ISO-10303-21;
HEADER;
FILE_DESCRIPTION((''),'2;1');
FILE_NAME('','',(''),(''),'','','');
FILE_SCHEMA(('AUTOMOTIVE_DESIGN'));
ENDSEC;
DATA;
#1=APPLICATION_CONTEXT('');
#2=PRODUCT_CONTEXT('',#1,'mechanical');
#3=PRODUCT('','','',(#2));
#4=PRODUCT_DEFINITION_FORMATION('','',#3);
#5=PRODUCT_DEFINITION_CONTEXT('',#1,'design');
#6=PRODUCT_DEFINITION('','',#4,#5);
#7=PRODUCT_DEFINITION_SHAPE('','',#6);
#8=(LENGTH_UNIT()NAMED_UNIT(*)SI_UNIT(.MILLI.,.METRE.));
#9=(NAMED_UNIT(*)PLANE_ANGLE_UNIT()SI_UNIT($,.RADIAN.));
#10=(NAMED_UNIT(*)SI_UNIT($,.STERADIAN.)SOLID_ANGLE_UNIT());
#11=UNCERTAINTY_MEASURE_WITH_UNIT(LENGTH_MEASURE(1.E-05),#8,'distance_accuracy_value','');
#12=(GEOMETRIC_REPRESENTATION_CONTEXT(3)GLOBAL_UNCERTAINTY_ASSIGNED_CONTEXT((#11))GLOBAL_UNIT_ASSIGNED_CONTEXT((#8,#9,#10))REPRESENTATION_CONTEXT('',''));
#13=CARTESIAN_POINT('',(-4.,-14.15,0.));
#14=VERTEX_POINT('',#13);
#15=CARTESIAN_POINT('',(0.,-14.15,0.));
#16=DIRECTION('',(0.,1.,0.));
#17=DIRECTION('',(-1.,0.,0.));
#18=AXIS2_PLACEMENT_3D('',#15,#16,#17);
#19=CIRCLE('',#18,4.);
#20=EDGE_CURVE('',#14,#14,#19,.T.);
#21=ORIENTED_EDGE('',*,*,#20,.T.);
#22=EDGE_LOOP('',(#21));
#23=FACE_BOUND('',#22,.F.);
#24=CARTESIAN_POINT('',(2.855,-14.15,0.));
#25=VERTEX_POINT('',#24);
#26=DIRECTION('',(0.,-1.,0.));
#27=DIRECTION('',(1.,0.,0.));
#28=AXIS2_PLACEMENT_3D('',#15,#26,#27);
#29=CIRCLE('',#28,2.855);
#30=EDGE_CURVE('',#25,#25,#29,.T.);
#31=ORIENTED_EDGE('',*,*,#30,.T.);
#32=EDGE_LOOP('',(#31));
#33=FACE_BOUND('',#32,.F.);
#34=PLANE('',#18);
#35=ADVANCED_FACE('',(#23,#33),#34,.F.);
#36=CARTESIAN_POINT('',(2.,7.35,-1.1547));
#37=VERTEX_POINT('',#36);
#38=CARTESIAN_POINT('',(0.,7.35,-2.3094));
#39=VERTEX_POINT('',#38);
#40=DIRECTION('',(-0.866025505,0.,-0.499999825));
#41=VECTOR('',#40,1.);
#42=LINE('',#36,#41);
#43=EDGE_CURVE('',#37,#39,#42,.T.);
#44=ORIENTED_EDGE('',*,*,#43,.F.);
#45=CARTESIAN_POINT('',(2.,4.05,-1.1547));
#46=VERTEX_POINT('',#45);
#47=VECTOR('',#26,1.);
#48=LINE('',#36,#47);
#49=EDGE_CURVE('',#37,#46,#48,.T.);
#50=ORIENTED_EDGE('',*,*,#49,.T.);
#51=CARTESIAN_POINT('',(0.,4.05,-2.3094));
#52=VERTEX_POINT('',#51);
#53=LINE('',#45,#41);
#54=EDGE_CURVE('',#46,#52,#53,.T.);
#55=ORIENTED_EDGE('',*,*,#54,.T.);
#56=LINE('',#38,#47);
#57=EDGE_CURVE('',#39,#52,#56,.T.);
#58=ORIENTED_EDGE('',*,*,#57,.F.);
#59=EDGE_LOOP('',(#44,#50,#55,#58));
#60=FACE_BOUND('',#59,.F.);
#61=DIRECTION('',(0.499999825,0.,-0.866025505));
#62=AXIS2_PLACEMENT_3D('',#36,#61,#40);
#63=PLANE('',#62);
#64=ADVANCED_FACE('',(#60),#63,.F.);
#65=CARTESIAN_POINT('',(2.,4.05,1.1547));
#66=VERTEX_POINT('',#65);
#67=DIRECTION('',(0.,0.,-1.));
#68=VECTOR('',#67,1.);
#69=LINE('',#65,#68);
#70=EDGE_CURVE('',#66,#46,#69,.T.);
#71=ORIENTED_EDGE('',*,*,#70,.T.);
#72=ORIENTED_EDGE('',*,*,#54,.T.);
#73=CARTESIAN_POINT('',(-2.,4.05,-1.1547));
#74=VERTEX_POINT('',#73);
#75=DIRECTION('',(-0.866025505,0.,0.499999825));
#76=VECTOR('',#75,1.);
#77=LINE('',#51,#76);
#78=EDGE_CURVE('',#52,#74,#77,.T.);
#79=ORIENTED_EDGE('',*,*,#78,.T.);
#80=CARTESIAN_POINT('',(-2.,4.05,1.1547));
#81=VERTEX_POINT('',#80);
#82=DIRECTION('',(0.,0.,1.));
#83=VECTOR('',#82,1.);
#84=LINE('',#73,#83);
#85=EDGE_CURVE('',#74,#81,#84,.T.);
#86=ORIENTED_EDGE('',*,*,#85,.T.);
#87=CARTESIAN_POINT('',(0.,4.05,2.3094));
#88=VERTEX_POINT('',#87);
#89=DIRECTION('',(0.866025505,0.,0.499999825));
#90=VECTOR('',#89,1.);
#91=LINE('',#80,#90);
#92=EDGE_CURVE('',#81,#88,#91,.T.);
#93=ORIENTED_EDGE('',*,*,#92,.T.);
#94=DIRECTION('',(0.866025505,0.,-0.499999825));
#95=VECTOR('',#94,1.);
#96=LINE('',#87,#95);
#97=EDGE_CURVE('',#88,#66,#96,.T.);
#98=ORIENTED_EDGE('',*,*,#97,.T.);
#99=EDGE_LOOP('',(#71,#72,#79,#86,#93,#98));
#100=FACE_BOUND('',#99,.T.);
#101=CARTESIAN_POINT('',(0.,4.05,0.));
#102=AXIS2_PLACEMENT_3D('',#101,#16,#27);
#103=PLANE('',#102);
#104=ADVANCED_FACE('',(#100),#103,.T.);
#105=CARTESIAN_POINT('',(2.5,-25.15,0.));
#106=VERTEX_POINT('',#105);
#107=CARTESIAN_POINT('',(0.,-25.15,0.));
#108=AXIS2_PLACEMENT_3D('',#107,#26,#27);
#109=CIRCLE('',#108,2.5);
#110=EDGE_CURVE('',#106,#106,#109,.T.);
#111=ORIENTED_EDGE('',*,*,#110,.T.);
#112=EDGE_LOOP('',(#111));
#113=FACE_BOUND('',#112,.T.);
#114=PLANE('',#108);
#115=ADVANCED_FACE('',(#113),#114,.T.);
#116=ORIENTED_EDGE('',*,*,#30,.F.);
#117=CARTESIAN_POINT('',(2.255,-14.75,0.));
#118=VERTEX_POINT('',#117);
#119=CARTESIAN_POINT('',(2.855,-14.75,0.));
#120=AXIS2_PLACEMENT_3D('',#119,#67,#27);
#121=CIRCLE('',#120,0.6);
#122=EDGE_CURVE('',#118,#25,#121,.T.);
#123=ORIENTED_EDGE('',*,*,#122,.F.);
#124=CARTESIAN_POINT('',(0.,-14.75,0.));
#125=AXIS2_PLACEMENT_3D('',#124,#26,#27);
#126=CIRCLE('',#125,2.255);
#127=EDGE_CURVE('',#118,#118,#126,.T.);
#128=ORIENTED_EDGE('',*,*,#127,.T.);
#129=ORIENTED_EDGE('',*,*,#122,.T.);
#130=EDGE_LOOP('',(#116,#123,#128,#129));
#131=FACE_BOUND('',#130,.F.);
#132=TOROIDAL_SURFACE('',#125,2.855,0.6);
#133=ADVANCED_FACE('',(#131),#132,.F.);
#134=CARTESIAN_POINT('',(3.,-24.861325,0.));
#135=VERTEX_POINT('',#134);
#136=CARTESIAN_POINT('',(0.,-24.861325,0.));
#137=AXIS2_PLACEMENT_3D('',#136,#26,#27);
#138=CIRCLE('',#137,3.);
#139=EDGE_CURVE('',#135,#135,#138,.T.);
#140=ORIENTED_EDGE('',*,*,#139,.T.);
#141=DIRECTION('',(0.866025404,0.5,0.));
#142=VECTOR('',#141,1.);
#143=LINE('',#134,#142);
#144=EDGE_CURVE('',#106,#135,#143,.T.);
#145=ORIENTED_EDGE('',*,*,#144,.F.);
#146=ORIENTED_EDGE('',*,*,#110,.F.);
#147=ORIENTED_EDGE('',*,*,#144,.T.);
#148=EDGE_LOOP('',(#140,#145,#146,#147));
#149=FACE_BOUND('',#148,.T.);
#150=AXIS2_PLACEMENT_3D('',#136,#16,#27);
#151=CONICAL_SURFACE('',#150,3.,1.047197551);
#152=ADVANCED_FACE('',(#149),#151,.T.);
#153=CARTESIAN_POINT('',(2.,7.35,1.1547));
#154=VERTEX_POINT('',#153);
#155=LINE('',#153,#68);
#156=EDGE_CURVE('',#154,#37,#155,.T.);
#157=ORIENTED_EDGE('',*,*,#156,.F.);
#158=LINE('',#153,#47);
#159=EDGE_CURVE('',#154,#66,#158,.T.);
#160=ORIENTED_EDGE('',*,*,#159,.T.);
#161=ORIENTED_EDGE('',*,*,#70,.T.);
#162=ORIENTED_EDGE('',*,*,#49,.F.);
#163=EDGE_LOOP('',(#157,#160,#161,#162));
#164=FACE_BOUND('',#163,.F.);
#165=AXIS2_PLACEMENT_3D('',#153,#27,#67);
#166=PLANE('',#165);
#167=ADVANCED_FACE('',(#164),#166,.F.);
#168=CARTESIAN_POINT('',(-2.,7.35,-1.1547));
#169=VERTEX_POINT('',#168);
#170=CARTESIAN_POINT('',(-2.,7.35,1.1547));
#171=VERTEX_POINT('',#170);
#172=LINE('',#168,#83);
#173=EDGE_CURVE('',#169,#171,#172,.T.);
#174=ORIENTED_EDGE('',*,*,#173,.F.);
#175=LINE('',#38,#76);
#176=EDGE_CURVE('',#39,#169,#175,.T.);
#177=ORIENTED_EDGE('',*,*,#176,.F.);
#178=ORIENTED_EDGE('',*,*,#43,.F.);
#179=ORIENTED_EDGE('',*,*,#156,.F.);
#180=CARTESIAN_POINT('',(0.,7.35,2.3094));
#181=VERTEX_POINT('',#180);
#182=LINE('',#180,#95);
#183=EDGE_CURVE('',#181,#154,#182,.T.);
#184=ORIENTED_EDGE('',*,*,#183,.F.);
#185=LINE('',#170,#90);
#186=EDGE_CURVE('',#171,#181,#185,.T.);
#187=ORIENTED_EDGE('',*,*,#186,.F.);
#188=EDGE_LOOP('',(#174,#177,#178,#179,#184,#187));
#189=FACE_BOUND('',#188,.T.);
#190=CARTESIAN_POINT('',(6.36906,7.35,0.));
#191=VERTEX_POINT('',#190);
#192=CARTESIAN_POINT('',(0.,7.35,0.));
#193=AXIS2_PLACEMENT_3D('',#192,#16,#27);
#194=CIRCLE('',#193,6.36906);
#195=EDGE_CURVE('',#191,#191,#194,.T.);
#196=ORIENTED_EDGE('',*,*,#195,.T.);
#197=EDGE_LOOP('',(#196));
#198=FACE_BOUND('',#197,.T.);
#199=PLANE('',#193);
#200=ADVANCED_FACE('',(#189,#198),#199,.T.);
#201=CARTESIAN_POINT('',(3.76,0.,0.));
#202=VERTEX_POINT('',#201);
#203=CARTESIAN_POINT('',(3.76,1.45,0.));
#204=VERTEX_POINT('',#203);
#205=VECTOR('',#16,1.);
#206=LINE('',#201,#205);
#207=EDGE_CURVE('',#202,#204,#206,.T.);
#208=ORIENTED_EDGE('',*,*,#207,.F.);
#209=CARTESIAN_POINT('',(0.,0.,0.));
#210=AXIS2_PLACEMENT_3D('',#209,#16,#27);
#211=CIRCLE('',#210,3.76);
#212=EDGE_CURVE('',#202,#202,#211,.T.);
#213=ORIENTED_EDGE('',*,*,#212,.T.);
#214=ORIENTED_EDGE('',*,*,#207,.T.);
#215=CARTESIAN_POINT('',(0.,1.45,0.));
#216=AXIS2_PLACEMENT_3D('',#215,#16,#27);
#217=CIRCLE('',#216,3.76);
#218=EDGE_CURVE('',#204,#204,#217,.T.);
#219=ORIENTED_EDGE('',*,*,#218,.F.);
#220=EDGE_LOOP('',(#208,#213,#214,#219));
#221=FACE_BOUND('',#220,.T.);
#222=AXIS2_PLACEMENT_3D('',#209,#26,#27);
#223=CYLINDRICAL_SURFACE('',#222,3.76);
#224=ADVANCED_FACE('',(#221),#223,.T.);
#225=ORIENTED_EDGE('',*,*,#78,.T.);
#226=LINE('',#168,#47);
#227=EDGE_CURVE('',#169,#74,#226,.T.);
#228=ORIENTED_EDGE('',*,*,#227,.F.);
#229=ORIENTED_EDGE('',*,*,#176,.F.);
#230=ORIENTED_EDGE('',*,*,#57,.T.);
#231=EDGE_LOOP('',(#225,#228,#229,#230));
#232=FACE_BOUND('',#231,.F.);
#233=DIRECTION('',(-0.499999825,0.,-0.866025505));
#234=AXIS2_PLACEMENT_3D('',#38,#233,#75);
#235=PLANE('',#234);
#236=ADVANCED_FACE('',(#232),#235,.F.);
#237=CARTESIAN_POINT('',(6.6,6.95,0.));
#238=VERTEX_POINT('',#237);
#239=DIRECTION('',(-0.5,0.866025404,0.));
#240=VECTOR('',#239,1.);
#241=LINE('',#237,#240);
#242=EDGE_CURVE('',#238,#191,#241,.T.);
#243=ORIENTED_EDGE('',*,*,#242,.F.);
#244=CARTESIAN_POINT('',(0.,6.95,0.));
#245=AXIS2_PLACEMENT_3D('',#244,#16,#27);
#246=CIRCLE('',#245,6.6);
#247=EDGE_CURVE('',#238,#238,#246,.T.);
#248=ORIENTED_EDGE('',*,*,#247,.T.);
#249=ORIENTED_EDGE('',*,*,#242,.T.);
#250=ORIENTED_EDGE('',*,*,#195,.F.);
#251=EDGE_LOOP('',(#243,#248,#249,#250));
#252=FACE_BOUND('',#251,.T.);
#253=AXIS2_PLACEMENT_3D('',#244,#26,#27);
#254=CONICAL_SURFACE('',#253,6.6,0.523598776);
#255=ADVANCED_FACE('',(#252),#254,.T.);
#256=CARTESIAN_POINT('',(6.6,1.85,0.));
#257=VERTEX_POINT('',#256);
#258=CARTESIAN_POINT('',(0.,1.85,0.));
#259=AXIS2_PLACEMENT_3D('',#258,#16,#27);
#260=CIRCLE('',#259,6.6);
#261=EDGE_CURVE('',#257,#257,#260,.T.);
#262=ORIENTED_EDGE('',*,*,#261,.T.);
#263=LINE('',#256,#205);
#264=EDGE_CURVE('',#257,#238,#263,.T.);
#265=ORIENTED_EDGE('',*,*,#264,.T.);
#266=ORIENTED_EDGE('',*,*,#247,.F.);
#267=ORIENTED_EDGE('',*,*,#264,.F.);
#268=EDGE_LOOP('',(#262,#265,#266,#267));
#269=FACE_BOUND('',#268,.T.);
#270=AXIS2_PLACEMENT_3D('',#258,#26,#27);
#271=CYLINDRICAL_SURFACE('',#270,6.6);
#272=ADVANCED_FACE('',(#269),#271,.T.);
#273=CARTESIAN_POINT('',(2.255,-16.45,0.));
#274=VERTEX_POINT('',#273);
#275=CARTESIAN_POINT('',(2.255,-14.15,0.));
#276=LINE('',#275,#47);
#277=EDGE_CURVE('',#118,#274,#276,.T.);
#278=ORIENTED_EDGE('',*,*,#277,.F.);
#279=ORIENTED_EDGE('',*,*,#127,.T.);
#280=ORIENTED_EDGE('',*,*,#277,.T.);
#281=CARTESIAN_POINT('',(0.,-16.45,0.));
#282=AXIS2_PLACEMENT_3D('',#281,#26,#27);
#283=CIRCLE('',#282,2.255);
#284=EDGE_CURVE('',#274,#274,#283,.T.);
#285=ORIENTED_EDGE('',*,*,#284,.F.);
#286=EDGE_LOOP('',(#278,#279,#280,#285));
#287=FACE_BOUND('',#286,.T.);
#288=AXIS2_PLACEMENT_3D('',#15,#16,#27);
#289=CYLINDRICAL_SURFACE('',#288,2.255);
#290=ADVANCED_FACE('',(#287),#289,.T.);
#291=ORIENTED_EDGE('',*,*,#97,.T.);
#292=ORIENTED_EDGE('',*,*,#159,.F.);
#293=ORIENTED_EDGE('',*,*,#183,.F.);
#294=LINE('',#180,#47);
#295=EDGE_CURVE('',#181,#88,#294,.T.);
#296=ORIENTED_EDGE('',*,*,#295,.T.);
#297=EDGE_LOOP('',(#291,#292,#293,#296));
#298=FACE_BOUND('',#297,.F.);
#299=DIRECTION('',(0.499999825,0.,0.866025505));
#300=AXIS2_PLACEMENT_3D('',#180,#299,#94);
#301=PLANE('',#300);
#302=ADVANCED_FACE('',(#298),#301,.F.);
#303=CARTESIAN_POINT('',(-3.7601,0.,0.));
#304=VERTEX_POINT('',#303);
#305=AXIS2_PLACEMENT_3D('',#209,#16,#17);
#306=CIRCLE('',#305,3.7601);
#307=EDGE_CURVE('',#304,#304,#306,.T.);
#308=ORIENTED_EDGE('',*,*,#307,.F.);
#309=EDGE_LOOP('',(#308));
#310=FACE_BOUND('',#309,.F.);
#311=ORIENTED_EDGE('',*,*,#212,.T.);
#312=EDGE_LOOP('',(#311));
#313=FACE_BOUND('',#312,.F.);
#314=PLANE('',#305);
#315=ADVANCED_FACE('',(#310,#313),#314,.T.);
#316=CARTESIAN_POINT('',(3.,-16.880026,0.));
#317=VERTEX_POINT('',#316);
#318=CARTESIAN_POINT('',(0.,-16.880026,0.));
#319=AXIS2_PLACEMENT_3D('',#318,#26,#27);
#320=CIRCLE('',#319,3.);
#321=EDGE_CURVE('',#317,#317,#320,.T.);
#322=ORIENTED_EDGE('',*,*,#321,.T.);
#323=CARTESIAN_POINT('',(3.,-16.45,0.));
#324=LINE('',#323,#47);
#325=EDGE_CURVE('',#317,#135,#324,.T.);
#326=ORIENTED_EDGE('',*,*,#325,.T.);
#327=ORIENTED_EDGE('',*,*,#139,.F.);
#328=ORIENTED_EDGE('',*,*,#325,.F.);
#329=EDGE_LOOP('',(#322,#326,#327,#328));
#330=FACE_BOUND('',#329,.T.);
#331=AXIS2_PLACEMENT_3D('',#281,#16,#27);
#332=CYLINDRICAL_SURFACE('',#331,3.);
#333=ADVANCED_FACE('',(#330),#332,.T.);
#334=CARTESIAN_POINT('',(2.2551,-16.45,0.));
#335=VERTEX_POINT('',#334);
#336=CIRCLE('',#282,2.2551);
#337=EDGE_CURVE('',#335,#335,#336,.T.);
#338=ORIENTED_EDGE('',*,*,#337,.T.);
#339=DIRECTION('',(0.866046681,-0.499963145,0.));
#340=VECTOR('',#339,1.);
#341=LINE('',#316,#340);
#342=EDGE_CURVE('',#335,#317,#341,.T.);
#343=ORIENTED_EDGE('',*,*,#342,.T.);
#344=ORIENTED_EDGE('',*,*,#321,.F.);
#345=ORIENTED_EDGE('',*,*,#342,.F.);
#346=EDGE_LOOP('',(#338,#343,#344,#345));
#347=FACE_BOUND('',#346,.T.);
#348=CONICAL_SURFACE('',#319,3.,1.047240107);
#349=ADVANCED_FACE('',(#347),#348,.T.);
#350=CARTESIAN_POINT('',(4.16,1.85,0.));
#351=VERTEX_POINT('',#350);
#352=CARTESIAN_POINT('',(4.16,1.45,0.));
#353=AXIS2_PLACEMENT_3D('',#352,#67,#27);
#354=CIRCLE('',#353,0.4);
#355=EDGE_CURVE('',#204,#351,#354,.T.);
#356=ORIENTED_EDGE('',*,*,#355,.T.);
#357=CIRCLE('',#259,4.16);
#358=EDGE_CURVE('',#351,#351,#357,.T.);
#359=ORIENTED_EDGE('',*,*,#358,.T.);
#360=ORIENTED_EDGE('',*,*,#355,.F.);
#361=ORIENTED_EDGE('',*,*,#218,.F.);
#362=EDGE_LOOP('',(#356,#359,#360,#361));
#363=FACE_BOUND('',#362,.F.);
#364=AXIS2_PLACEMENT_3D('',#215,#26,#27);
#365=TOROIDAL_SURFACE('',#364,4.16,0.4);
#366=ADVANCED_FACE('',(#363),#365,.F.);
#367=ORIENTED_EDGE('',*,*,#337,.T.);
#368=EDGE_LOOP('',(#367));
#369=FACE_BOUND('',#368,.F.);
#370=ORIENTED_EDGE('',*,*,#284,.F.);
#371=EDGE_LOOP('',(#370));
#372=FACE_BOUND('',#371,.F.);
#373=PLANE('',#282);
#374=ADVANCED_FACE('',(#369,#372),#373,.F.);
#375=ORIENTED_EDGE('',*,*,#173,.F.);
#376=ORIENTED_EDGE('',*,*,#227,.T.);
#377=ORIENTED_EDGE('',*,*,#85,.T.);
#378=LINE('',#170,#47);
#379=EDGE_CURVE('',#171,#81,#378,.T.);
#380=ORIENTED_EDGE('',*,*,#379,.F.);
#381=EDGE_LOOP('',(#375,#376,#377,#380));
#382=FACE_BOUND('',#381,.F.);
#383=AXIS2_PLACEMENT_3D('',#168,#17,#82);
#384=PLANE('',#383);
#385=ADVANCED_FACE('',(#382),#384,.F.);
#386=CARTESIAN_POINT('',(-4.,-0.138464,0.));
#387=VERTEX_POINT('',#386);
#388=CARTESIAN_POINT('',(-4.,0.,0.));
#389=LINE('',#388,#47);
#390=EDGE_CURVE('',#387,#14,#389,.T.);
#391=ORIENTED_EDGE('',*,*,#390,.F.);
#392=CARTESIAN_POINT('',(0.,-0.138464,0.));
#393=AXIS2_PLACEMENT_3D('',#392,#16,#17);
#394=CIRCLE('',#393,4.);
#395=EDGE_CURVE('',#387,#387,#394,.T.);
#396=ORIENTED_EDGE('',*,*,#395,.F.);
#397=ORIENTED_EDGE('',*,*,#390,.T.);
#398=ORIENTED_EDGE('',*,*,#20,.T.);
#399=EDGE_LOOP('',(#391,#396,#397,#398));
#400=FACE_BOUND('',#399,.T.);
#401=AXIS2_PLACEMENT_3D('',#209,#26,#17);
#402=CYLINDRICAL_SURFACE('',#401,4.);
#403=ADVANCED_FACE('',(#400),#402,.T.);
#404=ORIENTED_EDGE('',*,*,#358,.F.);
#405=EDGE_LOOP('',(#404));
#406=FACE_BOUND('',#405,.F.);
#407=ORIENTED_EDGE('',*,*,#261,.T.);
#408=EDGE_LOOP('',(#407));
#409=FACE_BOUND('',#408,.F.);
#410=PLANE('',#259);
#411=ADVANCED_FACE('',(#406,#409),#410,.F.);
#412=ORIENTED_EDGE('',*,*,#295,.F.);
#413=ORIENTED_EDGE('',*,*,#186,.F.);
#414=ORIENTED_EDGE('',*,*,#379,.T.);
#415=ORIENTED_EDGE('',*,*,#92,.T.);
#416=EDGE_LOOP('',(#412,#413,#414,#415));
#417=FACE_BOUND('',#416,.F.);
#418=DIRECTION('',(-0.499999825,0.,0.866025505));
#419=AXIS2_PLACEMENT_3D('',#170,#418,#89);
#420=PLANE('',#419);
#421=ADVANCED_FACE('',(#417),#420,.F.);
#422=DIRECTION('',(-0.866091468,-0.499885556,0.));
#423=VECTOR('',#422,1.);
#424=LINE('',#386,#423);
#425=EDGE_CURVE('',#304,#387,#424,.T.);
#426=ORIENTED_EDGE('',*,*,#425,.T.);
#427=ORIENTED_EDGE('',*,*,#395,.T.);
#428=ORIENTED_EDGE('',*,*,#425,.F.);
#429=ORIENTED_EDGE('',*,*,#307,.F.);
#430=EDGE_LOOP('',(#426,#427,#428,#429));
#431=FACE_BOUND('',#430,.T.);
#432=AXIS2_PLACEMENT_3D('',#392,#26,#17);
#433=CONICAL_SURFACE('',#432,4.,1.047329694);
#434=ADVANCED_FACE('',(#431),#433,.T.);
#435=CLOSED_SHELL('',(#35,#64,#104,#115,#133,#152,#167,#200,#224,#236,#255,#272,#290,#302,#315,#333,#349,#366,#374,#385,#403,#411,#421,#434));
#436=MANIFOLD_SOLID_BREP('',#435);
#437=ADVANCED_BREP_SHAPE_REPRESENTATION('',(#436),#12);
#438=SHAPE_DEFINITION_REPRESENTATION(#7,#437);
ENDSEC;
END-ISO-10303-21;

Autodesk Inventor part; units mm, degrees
ref_plane "YZ Plane" through (0, 0, 0) normal (1, 0, 0) x (0, 1, 0)
ref_plane "XZ Plane" through (0, 0, 0) normal (0, 1, 0) x (-1, 0, 0)
ref_plane "XY Plane" through (0, 0, 0) normal (0, 0, 1) x (1, 0, 0)
sketch "Sketch1" plane through (0, 0, 0) normal (0, 0, 1) x (1, 0, 0)
  line L0 (0, 0) -> (-4, 0)
  line L1 (-4, 0) -> (-4, -14.15)
  line L2 (-4, -14.15) -> (0, -14.15)
  line L3 (0, -14.15) -> (0, 0)
  line L4 (0, 2.83) -> (0, -16.98) projected
  line L5 (-4.8, 0) -> (0.8, 0) projected
  dimension "d1" = 14.15
  dimension "d2" = 4
revolve "Shoulder" add sketch "Sketch1" angle 360 about axis through (0, -14.15, 0) along (0, 1, 0)
sketch "Sketch2" plane through (0, 0, 0) normal (0, 1, 0) x (1, 0, 0)
  circle A0 centre (0, 0) radius 4 projected
  circle A1 centre (0, 0) radius 3.76
  dimension "d3" = 7.52
extrude "Shoulder_neck" add sketch "Sketch2" along normal blind 1.85 contours A1
sketch "Sketch3" plane through (0, 1.85, 0) normal (0, 1, 0) x (1, 0, 0)
  circle A0 centre (0, 0) radius 3.76 projected
  circle A1 centre (0, 0) radius 6.6
  dimension "d6" = 13.2
extrude "Head" add sketch "Sketch3" along normal blind 5.5 contours A0 | A1
sketch "Sketch4" plane through (0, -14.15, 0) normal (0, -1, 0) x (1, 0, 0)
  circle A0 centre (0, 0) radius 4 projected
  circle A1 centre (0, 0) radius 2.255
  dimension "d9" = 4.51
extrude "Thread_neck" add sketch "Sketch4" along normal blind 2.3 contours A1
sketch "Sketch5" plane through (0, -16.45, 0) normal (0, -1, 0) x (1, 0, 0)
  circle A0 centre (0, 0) radius 2.255 projected
  circle A1 centre (0, 0) radius 3
  dimension "d12" = 6
extrude "Thread_shoulder" add sketch "Sketch5" along normal blind 8.7 contours A0 | A1
sketch "Sketch6" plane through (0, 7.35, 0) normal (0, 1, 0) x (1, 0, 0)
  circle A0 centre (0, 0) radius 6.6 projected
  circle A1 centre (0, 0) radius 2 construction
  line L0 (-2, 1.1547) -> (-2, -1.1547)
  line L1 (-2, -1.1547) -> (0, -2.3094)
  line L2 (0, -2.3094) -> (2, -1.1547)
  line L3 (2, -1.1547) -> (2, 1.1547)
  line L4 (2, 1.1547) -> (0, 2.3094)
  line L5 (0, 2.3094) -> (-2, 1.1547)
  dimension "d15" = 4
extrude "Hex" cut sketch "Sketch6" against normal blind 3.3 contours L5 L4 L3 L2 L1 L0
chamfer "Chamfer1" distance 0.24 angle 30 1 edges at (4, 0, 0) measured on face at (-3.8448, 0, -0.619)
fillet "Fillet1" radius 0.4 1 edges at (-3.76, 1.85, 0)
chamfer "Chamfer2" distance 0.4 angle 30 1 edges at (-6.6, 7.35, 0) measured on face at (6.5145, 5.5167, 1.0587)
chamfer "Chamfer3" distance 0.5 angle 30 1 edges at (-3, -25.15, 0) measured on face at (0.929, -25.15, 0.823)
fillet "Fillet2" radius 0.6 1 edges at (-2.255, -14.15, 0)
chamfer "Chamfer7" distance 0.745 angle 30 1 edges at (-3, -16.45, 0) measured on face at (2.7008, -16.45, -0.4192)
thread "Thread" size "M6x1" class "6g" standard "ANSI Metric M Profile" full length
equation "\"d2\" = 0.5 * Shoulder_diameter"
equation "\"d3\" = Shoulder_neck_dia"
equation "\"d4\" = Shoulder_neck_length"
equation "\"d6\" = Head_diameter"
equation "\"d7\" = Head_height"
equation "\"d9\" = Thread_neck_dia"
equation "\"d10\" = Thread_neck_length"
equation "\"d12\" = Thread_diameter"
equation "\"d13\" = Thread_length - Thread_neck_length"
equation "\"d15\" = Hex_size"
equation "\"d16\" = Hex_length"
equation "\"d18\" = -0.5 * Shoulder_neck_dia + 0.5 * Shoulder_diameter"
equation "\"d64\" = -0.5 * Shoulder_neck_dia + 0.5 * Shoulder_diameter"
equation "\"d21\" = 0.1 * Hex_size"
equation "\"d65\" = 0.1 * Hex_size"
equation "\"d23\" = 0.5 * Thread_pitch"
equation "\"d66\" = 0.5 * Thread_pitch"
equation "\"d25\" = Thread_neck_radius"
equation "\"d60\" = -0.5 * Thread_neck_dia + 0.5 * Thread_diameter"
equation "\"d67\" = -0.5 * Thread_neck_dia + 0.5 * Thread_diameter"
equation "\"Shoulder_diameter\" = 8"
equation "\"Shoulder_length\" = 35"
equation "\"Shoulder_neck_dia\" = 7.52"
equation "\"Thread_diameter\" = 6"
equation "\"Thread_length\" = 11"
equation "\"Head_diameter\" = 13.2"
equation "\"Head_height\" = 5.5"
equation "\"Thread_neck_dia\" = 4.51"
equation "\"Hex_size\" = 4"
equation "\"Hex_length\" = 3.3"
equation "\"Thread_pitch\" = 1"
equation "\"Shoulder_neck_length\" = 1.85"
equation "\"Thread_neck_length\" = 2.3"
equation "\"Thread_neck_radius\" = 0.6"
properties part number "SCREW, SHOULDER, P, 12.9,  M8X16MM" material "Steel, MS"
